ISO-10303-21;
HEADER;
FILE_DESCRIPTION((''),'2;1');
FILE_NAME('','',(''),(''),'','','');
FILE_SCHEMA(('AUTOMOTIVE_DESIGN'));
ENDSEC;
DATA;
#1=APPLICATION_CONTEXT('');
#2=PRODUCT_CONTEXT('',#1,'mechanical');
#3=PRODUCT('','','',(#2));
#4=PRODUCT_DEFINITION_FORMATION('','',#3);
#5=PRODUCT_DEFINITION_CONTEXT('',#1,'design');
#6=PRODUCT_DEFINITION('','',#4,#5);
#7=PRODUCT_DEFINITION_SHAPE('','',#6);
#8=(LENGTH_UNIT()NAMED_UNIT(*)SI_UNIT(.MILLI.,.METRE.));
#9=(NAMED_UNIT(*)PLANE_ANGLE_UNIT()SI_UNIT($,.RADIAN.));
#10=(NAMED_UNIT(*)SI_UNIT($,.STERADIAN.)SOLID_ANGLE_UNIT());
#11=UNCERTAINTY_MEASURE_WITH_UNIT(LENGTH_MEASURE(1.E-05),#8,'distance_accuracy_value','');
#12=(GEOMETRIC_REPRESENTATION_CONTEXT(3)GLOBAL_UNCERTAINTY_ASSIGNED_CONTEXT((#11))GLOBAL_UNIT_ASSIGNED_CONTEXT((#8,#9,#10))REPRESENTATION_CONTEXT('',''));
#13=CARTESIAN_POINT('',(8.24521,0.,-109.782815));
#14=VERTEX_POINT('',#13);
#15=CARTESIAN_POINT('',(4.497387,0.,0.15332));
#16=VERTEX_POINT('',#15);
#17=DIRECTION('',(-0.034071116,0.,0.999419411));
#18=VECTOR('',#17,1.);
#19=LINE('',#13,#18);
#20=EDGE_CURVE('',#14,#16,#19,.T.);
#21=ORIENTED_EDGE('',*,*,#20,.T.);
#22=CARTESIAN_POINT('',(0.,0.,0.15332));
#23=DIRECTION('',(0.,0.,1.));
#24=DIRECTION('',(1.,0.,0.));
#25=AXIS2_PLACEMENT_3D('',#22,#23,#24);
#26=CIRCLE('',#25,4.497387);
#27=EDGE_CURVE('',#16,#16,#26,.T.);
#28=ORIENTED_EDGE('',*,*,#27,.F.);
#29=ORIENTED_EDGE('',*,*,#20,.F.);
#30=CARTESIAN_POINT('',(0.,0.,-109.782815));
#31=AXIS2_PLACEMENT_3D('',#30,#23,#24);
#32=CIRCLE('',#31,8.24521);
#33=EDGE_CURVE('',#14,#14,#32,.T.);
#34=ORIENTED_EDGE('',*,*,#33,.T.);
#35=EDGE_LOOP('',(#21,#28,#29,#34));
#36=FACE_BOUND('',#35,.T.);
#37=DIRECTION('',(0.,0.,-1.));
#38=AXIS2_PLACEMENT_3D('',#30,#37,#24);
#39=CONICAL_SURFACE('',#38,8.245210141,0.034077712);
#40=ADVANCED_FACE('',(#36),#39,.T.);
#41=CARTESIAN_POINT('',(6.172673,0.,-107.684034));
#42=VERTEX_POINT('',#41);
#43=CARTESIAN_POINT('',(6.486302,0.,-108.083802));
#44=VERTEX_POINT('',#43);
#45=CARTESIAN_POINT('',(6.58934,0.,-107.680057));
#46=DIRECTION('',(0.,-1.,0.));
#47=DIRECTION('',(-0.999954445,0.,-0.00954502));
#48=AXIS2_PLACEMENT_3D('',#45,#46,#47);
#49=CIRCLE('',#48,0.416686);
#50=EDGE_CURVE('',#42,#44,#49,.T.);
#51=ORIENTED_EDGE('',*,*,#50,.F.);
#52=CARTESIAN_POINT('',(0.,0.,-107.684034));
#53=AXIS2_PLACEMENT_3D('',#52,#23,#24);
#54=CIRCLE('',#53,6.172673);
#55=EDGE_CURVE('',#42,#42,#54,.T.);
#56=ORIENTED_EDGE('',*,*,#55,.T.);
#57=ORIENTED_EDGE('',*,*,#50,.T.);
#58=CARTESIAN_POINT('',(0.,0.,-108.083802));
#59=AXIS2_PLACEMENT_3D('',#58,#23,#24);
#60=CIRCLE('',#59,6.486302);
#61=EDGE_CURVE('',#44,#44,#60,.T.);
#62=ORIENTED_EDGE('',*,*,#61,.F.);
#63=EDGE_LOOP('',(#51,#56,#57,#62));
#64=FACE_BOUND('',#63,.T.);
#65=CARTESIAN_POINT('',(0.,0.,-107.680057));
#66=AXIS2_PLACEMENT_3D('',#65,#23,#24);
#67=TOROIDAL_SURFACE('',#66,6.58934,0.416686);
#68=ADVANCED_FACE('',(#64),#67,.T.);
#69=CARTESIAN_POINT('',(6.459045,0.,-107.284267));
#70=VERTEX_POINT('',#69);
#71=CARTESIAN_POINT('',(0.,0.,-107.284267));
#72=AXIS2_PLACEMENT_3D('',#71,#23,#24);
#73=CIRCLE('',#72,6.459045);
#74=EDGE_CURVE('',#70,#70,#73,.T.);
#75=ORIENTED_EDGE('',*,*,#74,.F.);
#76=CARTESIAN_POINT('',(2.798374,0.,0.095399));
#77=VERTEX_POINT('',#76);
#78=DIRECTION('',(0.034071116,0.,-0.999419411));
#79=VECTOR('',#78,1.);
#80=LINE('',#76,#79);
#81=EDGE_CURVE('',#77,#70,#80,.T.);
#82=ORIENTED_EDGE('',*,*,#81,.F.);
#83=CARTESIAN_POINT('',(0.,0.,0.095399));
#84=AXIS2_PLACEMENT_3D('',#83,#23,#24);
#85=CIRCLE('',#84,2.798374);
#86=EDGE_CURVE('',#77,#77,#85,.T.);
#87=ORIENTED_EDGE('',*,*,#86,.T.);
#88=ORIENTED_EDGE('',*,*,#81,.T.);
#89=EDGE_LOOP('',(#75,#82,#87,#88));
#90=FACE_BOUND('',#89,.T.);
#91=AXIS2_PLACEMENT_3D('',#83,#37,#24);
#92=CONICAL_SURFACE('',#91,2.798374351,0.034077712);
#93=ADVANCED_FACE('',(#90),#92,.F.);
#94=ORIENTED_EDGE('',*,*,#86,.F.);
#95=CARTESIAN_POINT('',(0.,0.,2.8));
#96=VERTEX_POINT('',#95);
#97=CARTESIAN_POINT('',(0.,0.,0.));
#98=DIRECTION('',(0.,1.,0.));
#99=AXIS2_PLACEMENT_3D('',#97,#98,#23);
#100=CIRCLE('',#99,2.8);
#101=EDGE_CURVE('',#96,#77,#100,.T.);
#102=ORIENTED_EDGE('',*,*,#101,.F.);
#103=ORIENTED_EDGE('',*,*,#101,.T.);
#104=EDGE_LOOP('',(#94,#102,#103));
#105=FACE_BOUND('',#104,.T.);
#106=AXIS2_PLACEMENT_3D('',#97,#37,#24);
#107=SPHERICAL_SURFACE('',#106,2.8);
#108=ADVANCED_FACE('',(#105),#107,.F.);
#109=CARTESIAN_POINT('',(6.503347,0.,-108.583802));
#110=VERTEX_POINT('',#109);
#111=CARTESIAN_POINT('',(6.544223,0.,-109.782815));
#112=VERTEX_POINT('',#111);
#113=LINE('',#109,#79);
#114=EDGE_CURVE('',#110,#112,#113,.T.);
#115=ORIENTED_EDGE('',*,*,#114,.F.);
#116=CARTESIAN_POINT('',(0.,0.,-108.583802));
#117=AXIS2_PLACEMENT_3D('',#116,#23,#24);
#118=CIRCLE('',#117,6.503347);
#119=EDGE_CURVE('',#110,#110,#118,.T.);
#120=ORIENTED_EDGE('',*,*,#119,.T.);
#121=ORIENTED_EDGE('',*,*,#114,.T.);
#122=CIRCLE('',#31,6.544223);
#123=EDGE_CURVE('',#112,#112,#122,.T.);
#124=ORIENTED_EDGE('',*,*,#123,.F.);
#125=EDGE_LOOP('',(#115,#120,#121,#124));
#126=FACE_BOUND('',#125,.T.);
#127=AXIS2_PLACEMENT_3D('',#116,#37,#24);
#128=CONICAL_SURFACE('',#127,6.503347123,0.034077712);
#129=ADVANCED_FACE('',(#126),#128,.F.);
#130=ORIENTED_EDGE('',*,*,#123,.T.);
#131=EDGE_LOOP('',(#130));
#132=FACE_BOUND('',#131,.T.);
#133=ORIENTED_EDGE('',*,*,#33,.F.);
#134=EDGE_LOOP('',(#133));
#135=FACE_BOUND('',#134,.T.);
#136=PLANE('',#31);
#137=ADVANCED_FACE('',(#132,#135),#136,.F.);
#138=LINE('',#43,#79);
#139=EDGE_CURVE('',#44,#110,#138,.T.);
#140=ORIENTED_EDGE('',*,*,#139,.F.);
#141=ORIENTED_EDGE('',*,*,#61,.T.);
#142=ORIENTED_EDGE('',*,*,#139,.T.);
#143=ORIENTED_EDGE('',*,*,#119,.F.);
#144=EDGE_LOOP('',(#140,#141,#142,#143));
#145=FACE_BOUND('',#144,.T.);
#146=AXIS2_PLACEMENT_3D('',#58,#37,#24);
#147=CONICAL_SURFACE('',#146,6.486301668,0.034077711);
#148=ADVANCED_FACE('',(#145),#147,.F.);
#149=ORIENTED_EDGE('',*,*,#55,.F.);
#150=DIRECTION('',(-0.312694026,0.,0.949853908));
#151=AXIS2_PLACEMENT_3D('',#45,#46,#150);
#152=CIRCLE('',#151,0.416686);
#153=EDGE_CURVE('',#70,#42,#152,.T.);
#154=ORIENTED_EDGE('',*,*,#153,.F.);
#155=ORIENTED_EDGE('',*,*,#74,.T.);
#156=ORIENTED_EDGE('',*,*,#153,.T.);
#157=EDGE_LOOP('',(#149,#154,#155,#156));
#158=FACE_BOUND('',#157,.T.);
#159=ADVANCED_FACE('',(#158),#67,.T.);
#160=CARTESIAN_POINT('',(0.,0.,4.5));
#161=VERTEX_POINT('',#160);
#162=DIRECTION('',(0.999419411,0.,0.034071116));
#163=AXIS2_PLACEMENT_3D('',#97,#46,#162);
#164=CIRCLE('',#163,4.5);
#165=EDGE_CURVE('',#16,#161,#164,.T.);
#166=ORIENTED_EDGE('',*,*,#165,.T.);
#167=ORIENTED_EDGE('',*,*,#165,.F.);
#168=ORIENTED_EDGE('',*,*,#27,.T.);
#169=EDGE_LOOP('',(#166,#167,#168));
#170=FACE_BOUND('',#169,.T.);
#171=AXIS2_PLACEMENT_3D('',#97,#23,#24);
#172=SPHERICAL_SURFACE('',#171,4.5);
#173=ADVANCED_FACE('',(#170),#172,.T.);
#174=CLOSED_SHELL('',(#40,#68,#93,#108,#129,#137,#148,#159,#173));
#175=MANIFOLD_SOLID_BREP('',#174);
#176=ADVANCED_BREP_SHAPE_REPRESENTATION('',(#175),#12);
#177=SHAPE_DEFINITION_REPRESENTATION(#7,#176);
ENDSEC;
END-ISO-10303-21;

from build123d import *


# Not quite as in the source:
# - a feature of the source that left no trace in its solid (it failed there, or was rolled back) is left out
# - a feature names something its author has since deleted; it is built from what else it names


with BuildPart() as f1:
    # F0 (on Front) → F1 (revolve)
    with BuildSketch(Plane.XZ):
        with BuildLine():
            Line((8.2452101406, -109.7828151841), (4.4973873494, 0.1533200233))
            ThreePointArc((4.4973873494, 0.1533200233), (3.1273039423, 3.2357333098), (0, 4.5))
            Line((0, 4.5), (0, 2.8))
            ThreePointArc((0, 2.8), (1.9458780086, 2.0133451706), (2.7983743507, 0.0953991256))
            Line((2.7983743507, 0.0953991256), (6.4590447751, -107.2842666566))
            Line((6.4590447751, -107.2842666566), (6.4726732216, -107.684034421))
            Line((6.4726732216, -107.684034421), (6.4863016682, -108.0838021854))
            Line((6.4863016682, -108.0838021854), (6.5033471227, -108.5838021854))
            Line((6.5033471227, -108.5838021854), (6.5442225658, -109.7828151841))
            Line((6.5442225658, -109.7828151841), (8.2452101406, -109.7828151841))
        make_face()
        with BuildLine():
            Line((6.4726732216, -107.684034421), (6.4590447751, -107.2842666566))
            ThreePointArc((6.4590447751, -107.2842666566), (6.2505990382, -107.4374019066), (6.1726732216, -107.684034421))
            Line((6.1726732216, -107.684034421), (6.4726732216, -107.684034421))
        make_face()
        with BuildLine():
            ThreePointArc((6.1726732216, -107.684034421), (6.2615032541, -107.9372537095), (6.4863016682, -108.0838021854))
            Line((6.4863016682, -108.0838021854), (6.4726732216, -107.684034421))
            Line((6.4726732216, -107.684034421), (6.1726732216, -107.684034421))
        make_face()
    revolve(axis=Axis((0, 0, -52.7819509467), (0, 0, 1)))


solid = f1.part
